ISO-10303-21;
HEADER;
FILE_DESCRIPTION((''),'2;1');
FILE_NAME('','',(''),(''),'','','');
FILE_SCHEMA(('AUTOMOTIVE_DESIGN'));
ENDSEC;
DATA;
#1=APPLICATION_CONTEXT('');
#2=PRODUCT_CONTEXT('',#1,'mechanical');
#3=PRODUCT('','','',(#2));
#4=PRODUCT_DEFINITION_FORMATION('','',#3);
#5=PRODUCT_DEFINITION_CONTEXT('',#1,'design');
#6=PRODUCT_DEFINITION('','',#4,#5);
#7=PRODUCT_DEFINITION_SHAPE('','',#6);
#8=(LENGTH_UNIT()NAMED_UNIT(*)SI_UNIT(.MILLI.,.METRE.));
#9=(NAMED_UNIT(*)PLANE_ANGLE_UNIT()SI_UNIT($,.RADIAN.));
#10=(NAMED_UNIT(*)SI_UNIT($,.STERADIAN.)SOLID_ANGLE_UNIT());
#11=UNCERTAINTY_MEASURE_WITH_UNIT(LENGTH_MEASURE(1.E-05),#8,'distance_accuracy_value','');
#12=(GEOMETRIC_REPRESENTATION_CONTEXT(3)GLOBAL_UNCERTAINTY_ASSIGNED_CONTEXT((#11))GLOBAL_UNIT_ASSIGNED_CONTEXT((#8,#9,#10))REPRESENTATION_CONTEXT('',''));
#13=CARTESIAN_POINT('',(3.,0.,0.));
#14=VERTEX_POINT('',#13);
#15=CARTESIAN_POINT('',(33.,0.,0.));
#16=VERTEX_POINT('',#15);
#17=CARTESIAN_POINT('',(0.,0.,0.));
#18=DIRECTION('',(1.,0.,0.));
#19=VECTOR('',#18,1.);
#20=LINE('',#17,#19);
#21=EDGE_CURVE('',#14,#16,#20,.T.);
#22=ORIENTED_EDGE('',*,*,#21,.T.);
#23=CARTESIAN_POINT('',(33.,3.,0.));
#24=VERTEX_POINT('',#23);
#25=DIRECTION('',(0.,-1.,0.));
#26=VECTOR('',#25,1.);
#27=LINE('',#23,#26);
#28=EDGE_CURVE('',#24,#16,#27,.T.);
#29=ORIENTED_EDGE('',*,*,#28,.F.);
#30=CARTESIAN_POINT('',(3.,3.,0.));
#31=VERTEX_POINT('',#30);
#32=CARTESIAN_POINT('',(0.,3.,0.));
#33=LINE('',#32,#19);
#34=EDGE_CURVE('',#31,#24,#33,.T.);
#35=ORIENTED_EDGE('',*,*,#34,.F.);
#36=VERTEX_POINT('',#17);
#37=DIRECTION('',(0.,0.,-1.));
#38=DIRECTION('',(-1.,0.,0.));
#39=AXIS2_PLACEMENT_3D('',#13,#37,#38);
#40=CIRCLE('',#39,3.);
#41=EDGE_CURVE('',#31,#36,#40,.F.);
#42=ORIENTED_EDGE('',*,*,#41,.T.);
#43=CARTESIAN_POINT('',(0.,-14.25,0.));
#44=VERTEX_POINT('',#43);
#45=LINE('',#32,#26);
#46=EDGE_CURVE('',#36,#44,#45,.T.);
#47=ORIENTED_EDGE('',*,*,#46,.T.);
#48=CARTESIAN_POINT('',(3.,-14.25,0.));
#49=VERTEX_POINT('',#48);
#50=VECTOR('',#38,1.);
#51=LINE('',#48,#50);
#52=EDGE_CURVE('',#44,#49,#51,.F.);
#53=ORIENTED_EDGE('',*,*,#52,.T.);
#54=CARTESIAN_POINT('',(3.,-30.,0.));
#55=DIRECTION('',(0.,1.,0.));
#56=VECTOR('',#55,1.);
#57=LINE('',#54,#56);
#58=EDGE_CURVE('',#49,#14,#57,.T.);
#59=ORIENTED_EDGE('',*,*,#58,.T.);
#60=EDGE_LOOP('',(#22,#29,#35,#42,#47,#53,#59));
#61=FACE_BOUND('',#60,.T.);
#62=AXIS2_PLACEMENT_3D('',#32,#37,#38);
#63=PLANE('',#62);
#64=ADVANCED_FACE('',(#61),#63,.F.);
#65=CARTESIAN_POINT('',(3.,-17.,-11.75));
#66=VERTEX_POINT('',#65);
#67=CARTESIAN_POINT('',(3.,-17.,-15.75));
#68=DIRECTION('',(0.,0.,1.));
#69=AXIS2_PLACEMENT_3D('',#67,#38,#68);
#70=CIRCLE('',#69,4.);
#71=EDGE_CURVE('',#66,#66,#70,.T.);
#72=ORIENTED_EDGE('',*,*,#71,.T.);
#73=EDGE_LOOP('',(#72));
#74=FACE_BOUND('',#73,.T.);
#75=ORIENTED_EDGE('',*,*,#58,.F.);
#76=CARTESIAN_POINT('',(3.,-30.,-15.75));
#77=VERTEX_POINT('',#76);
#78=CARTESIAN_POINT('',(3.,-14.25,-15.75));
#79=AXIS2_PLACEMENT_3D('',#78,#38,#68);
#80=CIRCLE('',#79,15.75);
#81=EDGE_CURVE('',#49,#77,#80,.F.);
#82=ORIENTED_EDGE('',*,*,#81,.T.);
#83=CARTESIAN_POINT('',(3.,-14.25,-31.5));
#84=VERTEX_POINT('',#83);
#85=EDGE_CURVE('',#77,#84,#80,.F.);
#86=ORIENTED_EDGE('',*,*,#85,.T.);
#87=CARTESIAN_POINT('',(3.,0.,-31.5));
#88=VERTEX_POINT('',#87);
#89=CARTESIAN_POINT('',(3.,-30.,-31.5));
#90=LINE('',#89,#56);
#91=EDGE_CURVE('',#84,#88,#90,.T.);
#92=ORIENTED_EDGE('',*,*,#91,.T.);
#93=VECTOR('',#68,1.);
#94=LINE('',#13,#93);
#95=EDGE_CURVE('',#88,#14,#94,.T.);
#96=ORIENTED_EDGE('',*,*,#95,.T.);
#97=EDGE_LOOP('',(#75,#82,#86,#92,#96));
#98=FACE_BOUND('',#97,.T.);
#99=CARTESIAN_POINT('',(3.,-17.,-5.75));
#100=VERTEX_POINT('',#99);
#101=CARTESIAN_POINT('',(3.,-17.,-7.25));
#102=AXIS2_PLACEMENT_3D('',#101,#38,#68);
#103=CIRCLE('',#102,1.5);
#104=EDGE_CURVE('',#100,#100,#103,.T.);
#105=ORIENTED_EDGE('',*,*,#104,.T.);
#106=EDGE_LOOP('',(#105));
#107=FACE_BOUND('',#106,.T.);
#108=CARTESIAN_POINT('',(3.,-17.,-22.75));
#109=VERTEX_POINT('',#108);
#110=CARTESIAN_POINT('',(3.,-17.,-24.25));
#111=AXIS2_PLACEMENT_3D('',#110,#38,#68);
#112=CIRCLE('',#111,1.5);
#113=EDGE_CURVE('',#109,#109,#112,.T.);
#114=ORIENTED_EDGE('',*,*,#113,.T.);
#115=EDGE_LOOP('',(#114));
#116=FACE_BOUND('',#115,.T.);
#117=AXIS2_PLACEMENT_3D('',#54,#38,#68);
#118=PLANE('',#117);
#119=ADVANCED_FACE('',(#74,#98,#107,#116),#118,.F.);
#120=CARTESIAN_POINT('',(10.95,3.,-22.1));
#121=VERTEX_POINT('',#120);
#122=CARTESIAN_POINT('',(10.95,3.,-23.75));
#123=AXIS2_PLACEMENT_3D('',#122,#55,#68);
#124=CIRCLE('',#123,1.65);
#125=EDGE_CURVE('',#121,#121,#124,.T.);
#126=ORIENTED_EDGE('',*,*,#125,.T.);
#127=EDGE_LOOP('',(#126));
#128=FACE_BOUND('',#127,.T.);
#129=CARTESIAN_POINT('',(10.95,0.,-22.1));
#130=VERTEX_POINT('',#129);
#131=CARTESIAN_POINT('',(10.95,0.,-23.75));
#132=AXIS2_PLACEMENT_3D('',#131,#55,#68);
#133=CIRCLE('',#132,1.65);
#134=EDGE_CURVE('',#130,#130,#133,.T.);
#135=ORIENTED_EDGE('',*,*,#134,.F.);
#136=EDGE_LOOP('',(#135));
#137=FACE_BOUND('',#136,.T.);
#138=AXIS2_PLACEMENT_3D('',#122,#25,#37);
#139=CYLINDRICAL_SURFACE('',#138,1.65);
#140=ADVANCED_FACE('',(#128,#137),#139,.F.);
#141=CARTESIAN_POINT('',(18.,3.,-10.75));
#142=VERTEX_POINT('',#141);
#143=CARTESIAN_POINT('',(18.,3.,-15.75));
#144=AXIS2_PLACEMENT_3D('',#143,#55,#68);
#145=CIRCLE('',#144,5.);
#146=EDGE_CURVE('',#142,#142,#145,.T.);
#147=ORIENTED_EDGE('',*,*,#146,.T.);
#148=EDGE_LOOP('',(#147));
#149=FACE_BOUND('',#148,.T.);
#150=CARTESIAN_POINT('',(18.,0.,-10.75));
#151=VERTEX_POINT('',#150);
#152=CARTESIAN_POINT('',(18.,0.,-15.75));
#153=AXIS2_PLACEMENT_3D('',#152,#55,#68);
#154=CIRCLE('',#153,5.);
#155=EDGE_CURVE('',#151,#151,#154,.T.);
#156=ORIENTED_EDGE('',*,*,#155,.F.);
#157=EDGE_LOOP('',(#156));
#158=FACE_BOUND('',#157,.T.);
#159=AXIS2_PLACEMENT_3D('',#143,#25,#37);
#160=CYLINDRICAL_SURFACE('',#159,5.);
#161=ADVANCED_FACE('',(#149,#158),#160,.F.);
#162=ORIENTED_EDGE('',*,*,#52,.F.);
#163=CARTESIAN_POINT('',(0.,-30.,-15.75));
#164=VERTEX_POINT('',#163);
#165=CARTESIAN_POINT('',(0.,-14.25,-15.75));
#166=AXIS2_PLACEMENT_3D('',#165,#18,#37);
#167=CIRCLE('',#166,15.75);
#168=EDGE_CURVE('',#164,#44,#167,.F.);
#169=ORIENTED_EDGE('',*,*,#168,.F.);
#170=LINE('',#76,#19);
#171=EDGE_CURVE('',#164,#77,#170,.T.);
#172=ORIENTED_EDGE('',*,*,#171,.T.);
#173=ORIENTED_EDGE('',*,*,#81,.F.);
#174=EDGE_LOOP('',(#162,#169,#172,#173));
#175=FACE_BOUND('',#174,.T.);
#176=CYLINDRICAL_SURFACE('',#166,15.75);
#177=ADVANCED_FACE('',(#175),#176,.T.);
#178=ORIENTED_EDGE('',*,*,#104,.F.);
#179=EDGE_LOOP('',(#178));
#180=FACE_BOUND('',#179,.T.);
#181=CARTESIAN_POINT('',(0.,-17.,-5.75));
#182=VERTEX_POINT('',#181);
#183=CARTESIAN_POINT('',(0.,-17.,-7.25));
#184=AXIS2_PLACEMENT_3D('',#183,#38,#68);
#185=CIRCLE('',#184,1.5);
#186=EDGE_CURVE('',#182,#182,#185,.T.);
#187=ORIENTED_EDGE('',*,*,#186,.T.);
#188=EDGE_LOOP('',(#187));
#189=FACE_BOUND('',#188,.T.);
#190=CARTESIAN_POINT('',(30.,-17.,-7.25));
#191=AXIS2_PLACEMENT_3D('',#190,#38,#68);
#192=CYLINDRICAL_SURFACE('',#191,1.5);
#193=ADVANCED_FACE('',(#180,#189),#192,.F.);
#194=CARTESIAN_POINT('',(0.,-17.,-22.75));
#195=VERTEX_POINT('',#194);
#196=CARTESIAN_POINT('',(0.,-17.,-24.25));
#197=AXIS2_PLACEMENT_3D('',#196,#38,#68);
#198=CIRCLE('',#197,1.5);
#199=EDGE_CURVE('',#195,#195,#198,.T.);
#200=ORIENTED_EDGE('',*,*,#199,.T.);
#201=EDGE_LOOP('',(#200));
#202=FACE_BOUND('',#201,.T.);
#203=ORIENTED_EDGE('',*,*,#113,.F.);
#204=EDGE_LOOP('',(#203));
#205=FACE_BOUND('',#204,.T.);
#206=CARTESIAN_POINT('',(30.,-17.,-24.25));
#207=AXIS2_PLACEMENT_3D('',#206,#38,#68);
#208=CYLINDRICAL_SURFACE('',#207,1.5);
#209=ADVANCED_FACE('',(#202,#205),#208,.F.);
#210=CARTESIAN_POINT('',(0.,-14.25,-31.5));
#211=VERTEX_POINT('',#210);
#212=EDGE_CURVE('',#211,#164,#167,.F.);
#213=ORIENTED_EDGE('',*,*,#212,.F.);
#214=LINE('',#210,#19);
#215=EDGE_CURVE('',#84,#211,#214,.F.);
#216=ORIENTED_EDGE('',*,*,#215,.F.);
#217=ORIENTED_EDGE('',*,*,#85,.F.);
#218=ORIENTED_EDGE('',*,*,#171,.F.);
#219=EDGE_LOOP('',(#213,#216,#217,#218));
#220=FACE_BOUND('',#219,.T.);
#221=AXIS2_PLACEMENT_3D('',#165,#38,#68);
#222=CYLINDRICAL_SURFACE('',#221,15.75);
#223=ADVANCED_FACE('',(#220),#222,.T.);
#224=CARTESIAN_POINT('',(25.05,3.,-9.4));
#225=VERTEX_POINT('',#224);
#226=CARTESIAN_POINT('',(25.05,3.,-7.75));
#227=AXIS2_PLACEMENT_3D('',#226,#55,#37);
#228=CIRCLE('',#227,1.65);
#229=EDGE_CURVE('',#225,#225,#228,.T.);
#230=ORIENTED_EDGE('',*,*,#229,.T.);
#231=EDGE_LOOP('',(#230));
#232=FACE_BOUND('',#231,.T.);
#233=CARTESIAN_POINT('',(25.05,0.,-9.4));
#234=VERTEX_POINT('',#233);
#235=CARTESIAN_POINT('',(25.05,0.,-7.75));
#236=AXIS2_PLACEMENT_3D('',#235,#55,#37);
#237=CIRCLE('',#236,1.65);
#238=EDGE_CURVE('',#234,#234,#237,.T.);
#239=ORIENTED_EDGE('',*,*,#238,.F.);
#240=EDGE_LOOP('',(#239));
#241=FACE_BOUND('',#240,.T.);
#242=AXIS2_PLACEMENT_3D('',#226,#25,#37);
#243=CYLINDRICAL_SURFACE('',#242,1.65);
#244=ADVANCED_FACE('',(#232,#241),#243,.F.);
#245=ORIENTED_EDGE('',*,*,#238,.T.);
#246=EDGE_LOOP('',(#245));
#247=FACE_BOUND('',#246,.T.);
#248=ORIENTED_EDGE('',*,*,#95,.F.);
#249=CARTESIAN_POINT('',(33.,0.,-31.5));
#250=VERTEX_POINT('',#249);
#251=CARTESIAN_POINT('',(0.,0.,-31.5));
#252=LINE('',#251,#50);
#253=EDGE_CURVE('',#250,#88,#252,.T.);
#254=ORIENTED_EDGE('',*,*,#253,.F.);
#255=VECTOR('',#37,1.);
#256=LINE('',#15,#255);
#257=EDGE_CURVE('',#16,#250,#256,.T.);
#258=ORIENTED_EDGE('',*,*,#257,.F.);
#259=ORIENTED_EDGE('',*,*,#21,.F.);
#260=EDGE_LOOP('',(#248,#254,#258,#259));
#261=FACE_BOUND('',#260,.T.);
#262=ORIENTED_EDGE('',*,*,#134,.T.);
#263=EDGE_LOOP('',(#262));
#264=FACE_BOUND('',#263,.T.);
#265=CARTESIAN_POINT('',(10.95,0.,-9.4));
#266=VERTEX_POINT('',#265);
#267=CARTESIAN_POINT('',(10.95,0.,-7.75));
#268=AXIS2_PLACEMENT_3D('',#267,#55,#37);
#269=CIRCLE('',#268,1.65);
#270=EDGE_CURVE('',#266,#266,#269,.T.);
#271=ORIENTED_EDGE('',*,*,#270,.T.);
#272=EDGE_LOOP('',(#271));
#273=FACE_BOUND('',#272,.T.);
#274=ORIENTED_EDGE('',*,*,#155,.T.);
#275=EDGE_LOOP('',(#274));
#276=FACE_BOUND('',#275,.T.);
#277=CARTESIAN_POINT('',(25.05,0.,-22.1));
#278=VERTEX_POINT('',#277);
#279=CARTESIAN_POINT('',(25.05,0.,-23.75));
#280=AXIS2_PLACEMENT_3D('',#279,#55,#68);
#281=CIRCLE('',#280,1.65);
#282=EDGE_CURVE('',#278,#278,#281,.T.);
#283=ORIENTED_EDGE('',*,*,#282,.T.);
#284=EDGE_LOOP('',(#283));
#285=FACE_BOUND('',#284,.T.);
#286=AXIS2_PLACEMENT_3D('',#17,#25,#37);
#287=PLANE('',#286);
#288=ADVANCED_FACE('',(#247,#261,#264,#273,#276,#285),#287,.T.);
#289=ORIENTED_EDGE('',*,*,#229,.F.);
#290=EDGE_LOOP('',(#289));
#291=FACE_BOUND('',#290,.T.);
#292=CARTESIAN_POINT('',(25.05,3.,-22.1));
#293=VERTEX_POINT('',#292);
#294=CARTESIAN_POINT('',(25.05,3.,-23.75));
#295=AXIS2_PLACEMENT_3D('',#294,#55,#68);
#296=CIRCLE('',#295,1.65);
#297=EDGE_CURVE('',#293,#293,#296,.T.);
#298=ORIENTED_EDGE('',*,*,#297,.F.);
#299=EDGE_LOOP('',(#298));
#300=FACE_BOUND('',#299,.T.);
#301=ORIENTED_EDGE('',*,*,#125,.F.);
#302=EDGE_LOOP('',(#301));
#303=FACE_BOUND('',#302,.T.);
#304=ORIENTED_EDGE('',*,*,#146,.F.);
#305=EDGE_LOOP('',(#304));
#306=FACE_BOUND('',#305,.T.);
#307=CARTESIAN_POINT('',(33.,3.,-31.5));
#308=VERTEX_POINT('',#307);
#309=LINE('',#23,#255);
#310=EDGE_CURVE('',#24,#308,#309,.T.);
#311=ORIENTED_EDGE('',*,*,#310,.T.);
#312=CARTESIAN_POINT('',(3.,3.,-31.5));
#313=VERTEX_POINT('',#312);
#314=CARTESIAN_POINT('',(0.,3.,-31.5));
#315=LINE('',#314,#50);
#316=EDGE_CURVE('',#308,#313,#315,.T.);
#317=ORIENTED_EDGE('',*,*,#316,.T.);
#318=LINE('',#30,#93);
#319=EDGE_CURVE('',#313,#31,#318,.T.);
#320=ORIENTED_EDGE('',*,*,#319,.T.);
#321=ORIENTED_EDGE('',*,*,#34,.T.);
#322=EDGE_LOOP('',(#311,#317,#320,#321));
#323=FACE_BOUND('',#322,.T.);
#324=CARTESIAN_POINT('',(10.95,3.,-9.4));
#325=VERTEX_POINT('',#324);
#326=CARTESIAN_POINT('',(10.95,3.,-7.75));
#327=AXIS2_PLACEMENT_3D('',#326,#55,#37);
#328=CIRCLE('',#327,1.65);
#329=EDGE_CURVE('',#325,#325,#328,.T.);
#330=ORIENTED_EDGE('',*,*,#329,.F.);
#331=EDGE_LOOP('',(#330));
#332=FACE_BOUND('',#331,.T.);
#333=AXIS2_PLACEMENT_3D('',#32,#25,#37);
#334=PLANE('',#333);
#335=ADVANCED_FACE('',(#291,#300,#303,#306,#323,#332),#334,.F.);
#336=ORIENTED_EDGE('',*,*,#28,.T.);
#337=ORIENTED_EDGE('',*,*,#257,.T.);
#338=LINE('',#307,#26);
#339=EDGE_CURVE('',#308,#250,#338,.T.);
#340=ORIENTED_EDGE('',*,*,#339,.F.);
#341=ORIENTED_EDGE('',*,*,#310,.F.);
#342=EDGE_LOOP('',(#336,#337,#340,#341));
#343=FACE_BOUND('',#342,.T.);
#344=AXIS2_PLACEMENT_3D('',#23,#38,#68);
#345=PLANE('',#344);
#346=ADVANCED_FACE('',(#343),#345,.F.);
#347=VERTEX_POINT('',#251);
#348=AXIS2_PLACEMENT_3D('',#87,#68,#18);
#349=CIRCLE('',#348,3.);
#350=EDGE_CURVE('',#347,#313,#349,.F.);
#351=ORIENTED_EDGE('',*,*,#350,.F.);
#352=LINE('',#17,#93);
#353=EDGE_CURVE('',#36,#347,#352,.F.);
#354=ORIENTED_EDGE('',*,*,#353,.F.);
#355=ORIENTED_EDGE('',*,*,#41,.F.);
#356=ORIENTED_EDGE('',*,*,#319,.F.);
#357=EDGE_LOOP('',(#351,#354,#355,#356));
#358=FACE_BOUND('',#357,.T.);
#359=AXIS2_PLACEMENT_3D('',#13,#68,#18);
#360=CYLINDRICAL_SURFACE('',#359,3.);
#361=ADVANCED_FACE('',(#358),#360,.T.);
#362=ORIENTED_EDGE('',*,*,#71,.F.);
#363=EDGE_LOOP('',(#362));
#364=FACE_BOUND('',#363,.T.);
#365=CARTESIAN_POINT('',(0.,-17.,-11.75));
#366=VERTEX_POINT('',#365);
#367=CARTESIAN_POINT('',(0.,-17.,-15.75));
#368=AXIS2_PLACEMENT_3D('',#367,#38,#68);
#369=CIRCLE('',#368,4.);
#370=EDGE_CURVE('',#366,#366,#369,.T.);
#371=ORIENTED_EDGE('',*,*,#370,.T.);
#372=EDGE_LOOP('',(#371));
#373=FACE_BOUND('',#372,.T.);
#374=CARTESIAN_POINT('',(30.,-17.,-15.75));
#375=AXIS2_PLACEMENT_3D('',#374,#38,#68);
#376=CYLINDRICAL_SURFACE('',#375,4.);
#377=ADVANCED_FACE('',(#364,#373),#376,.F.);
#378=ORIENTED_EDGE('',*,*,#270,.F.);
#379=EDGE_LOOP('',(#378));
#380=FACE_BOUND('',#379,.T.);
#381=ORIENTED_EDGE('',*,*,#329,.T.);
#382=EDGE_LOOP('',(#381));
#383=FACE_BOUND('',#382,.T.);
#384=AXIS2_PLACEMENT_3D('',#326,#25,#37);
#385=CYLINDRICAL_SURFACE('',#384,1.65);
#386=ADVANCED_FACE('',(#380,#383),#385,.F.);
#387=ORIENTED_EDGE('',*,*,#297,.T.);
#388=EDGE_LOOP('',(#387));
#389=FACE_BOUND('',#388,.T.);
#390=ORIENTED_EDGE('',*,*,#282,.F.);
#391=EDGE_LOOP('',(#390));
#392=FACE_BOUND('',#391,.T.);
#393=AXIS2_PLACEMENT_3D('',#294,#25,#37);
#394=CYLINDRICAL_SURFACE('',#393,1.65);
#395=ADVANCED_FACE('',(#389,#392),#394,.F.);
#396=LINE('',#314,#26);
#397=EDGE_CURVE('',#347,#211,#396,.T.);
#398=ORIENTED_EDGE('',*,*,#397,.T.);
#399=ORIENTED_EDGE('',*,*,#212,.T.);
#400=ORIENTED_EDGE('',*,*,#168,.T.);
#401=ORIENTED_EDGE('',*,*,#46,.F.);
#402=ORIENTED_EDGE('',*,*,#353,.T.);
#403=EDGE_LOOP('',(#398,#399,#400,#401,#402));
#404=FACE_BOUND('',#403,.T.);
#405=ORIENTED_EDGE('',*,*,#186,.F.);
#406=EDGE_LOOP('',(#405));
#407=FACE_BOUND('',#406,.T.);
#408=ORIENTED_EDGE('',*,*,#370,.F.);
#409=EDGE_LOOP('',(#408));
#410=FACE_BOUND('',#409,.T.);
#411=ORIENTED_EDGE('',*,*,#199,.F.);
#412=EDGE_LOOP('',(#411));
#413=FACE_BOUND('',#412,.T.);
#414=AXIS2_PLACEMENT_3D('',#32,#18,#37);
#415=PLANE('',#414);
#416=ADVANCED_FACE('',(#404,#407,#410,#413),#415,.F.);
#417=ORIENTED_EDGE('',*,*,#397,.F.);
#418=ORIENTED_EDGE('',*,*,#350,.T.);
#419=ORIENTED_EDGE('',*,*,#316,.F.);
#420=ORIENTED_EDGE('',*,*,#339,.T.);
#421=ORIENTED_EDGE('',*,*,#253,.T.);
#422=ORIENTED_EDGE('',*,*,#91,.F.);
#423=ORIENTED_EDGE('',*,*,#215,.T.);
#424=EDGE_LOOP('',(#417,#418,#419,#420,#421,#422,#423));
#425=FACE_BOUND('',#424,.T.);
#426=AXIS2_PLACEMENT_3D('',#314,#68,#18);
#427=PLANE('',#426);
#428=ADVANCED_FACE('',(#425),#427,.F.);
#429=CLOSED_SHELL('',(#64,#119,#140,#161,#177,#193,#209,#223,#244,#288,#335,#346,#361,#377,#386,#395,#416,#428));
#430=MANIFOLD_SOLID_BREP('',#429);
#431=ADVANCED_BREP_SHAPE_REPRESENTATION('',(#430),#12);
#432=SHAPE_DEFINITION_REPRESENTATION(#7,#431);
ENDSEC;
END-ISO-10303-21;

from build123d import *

# Parameters (mm, degrees)
SKETCH1_W           = 33
SKETCH1_H           = 31.5
SKETCH1_R           = 5
SKETCH1_R_2         = 1.65
BOSS_EXTRUDE1_DEPTH = 3
SKETCH2_W           = 3
SKETCH2_H           = 31.5
BOSS_EXTRUDE2_DEPTH = 30
SKETCH3_R           = 1.5
SKETCH3_R_2         = 4
CUT_EXTRUDE1_DEPTH  = 30
FILLET3_R           = 15.75
FILLET4_R           = 3


with BuildPart() as part:
    # Sketch1 → Boss-Extrude1 (new body)
    with BuildSketch(Plane(origin=(0, 0, 0), x_dir=(1, 0, 0), z_dir=(0, 1, 0))):
        with Locations((16.5, 15.75)):
            Rectangle(SKETCH1_W, SKETCH1_H)
        with Locations(Location((18, 15.75, 0), (0, 0, 270))):
            Circle(SKETCH1_R, mode=Mode.SUBTRACT)
        with Locations(Location((25.05, 23.75, 0), (0, 0, 270))):
            Circle(SKETCH1_R_2, mode=Mode.SUBTRACT)
        with Locations(Location((10.95, 23.75, 0), (0, 0, 270))):
            Circle(SKETCH1_R_2, mode=Mode.SUBTRACT)
        with Locations(Location((25.05, 7.75, 0), (0, 0, 90))):
            Circle(SKETCH1_R_2, mode=Mode.SUBTRACT)
        with Locations(Location((10.95, 7.75, 0), (0, 0, 90))):
            Circle(SKETCH1_R_2, mode=Mode.SUBTRACT)
    extrude(amount=BOSS_EXTRUDE1_DEPTH)

    # Sketch2 → Boss-Extrude2 (add)
    with BuildSketch(Plane.XZ):
        with Locations((1.5, -15.75)):
            Rectangle(SKETCH2_W, SKETCH2_H)
    extrude(amount=BOSS_EXTRUDE2_DEPTH)

    # Sketch3 → Cut-Extrude1 (cut)
    with BuildSketch(Plane.ZY):
        with Locations((-24.25, -17)):
            Circle(SKETCH3_R)
        with Locations((-7.25, -17)):
            Circle(SKETCH3_R)
        with Locations((-15.75, -17)):
            Circle(SKETCH3_R_2)
    extrude(amount=-CUT_EXTRUDE1_DEPTH, mode=Mode.SUBTRACT)

    # Fillet3
    fillet3_edges = [part.edges().sort_by_distance(p)[0] for p in [
        (1.5, -30, 0),
        (1.5, -30, -31.5),
    ]]
    fillet(fillet3_edges, radius=FILLET3_R - 0.0001)  # a hair under: the kernel refuses the full size

    # Fillet4
    fillet4_edges = [part.edges().sort_by_distance(p)[0] for p in [
        (0, 3, -15.75),
    ]]
    fillet(fillet4_edges, radius=FILLET4_R)


solid = part.part
